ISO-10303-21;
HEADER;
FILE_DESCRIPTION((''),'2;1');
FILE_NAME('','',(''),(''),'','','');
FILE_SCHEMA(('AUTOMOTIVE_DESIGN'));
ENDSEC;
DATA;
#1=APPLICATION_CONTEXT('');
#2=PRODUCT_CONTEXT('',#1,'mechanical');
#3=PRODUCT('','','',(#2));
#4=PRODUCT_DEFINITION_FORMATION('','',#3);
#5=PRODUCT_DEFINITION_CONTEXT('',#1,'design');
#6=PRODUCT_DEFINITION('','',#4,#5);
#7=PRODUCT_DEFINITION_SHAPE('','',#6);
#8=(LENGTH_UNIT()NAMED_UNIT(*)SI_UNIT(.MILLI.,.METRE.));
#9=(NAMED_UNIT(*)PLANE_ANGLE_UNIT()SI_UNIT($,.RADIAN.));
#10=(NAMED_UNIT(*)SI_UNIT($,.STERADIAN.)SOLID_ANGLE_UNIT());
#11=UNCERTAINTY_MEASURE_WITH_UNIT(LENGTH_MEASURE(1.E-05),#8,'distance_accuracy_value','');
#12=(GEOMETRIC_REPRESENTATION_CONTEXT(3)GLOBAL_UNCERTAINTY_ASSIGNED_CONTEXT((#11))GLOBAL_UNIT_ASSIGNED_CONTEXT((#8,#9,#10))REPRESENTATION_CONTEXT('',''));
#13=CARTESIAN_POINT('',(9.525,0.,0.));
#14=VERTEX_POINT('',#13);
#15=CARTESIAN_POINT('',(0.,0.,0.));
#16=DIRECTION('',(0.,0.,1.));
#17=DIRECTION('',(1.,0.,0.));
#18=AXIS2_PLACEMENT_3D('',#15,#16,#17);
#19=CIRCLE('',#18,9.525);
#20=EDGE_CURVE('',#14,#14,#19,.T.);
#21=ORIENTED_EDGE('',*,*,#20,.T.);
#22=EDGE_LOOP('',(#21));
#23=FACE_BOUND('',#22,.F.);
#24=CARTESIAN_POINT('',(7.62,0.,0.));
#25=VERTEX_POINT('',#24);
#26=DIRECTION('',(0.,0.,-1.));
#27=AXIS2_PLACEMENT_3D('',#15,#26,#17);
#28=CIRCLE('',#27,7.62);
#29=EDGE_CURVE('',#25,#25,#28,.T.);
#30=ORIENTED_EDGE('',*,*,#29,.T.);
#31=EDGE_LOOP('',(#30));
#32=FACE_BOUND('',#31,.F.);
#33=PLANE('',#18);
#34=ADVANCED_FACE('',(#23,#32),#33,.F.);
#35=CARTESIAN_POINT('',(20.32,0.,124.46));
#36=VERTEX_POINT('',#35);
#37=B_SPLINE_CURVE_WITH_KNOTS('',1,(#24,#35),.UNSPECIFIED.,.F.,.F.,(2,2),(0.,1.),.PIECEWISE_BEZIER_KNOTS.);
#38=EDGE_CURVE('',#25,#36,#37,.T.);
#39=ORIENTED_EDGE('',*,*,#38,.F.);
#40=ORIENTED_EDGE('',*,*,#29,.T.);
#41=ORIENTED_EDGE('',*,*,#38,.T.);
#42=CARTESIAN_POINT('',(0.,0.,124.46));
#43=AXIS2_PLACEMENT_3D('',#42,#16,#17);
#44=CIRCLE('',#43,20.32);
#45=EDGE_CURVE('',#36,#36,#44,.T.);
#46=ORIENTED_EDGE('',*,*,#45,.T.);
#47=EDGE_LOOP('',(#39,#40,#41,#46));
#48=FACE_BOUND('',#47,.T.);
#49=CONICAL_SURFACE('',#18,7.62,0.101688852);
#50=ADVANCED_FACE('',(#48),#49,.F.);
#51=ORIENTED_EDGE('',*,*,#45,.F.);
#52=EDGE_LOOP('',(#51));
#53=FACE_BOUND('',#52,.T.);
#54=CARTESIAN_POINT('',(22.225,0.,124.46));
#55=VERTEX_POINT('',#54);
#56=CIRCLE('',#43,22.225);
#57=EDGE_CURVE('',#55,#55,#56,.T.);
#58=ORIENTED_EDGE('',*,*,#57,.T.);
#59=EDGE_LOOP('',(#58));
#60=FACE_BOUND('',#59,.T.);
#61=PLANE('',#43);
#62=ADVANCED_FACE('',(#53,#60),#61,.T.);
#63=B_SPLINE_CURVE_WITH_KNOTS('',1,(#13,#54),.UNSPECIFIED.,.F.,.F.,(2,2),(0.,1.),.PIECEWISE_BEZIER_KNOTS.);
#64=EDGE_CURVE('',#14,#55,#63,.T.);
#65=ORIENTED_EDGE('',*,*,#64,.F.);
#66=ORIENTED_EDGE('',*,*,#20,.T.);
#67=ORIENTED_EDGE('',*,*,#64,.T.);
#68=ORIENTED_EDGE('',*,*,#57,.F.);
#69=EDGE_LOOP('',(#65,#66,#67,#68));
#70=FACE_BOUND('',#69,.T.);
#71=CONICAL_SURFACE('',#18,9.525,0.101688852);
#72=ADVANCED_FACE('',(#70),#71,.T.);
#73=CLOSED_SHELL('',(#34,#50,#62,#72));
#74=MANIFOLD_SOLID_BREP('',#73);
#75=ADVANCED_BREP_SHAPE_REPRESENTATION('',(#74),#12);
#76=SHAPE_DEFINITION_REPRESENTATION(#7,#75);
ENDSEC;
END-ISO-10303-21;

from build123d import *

# Parameters (mm, degrees)
F0_R = 9.525
F2_R = 22.225
F5_R = 7.62
F4_R = 20.32


with BuildPart() as f3:
    # F0 (on Top) → F3 section 0
    with BuildSketch(Plane.XY):
        Circle(F0_R)
    # F2 (on offset) → F3 section 1
    with BuildSketch(Plane.XY.offset(124.46)):
        Circle(F2_R)
    loft()

    # F5 (on face) → F6 section 0
    with BuildSketch(Plane(origin=(0, 0, 0), x_dir=(1, 0, 0), z_dir=(0, 0, -1))):
        Circle(F5_R)
    # F4 (on face) → F6 section 1
    with BuildSketch(Plane.XY.offset(124.46)):
        Circle(F4_R)
    loft(mode=Mode.SUBTRACT)


solid = f3.part
